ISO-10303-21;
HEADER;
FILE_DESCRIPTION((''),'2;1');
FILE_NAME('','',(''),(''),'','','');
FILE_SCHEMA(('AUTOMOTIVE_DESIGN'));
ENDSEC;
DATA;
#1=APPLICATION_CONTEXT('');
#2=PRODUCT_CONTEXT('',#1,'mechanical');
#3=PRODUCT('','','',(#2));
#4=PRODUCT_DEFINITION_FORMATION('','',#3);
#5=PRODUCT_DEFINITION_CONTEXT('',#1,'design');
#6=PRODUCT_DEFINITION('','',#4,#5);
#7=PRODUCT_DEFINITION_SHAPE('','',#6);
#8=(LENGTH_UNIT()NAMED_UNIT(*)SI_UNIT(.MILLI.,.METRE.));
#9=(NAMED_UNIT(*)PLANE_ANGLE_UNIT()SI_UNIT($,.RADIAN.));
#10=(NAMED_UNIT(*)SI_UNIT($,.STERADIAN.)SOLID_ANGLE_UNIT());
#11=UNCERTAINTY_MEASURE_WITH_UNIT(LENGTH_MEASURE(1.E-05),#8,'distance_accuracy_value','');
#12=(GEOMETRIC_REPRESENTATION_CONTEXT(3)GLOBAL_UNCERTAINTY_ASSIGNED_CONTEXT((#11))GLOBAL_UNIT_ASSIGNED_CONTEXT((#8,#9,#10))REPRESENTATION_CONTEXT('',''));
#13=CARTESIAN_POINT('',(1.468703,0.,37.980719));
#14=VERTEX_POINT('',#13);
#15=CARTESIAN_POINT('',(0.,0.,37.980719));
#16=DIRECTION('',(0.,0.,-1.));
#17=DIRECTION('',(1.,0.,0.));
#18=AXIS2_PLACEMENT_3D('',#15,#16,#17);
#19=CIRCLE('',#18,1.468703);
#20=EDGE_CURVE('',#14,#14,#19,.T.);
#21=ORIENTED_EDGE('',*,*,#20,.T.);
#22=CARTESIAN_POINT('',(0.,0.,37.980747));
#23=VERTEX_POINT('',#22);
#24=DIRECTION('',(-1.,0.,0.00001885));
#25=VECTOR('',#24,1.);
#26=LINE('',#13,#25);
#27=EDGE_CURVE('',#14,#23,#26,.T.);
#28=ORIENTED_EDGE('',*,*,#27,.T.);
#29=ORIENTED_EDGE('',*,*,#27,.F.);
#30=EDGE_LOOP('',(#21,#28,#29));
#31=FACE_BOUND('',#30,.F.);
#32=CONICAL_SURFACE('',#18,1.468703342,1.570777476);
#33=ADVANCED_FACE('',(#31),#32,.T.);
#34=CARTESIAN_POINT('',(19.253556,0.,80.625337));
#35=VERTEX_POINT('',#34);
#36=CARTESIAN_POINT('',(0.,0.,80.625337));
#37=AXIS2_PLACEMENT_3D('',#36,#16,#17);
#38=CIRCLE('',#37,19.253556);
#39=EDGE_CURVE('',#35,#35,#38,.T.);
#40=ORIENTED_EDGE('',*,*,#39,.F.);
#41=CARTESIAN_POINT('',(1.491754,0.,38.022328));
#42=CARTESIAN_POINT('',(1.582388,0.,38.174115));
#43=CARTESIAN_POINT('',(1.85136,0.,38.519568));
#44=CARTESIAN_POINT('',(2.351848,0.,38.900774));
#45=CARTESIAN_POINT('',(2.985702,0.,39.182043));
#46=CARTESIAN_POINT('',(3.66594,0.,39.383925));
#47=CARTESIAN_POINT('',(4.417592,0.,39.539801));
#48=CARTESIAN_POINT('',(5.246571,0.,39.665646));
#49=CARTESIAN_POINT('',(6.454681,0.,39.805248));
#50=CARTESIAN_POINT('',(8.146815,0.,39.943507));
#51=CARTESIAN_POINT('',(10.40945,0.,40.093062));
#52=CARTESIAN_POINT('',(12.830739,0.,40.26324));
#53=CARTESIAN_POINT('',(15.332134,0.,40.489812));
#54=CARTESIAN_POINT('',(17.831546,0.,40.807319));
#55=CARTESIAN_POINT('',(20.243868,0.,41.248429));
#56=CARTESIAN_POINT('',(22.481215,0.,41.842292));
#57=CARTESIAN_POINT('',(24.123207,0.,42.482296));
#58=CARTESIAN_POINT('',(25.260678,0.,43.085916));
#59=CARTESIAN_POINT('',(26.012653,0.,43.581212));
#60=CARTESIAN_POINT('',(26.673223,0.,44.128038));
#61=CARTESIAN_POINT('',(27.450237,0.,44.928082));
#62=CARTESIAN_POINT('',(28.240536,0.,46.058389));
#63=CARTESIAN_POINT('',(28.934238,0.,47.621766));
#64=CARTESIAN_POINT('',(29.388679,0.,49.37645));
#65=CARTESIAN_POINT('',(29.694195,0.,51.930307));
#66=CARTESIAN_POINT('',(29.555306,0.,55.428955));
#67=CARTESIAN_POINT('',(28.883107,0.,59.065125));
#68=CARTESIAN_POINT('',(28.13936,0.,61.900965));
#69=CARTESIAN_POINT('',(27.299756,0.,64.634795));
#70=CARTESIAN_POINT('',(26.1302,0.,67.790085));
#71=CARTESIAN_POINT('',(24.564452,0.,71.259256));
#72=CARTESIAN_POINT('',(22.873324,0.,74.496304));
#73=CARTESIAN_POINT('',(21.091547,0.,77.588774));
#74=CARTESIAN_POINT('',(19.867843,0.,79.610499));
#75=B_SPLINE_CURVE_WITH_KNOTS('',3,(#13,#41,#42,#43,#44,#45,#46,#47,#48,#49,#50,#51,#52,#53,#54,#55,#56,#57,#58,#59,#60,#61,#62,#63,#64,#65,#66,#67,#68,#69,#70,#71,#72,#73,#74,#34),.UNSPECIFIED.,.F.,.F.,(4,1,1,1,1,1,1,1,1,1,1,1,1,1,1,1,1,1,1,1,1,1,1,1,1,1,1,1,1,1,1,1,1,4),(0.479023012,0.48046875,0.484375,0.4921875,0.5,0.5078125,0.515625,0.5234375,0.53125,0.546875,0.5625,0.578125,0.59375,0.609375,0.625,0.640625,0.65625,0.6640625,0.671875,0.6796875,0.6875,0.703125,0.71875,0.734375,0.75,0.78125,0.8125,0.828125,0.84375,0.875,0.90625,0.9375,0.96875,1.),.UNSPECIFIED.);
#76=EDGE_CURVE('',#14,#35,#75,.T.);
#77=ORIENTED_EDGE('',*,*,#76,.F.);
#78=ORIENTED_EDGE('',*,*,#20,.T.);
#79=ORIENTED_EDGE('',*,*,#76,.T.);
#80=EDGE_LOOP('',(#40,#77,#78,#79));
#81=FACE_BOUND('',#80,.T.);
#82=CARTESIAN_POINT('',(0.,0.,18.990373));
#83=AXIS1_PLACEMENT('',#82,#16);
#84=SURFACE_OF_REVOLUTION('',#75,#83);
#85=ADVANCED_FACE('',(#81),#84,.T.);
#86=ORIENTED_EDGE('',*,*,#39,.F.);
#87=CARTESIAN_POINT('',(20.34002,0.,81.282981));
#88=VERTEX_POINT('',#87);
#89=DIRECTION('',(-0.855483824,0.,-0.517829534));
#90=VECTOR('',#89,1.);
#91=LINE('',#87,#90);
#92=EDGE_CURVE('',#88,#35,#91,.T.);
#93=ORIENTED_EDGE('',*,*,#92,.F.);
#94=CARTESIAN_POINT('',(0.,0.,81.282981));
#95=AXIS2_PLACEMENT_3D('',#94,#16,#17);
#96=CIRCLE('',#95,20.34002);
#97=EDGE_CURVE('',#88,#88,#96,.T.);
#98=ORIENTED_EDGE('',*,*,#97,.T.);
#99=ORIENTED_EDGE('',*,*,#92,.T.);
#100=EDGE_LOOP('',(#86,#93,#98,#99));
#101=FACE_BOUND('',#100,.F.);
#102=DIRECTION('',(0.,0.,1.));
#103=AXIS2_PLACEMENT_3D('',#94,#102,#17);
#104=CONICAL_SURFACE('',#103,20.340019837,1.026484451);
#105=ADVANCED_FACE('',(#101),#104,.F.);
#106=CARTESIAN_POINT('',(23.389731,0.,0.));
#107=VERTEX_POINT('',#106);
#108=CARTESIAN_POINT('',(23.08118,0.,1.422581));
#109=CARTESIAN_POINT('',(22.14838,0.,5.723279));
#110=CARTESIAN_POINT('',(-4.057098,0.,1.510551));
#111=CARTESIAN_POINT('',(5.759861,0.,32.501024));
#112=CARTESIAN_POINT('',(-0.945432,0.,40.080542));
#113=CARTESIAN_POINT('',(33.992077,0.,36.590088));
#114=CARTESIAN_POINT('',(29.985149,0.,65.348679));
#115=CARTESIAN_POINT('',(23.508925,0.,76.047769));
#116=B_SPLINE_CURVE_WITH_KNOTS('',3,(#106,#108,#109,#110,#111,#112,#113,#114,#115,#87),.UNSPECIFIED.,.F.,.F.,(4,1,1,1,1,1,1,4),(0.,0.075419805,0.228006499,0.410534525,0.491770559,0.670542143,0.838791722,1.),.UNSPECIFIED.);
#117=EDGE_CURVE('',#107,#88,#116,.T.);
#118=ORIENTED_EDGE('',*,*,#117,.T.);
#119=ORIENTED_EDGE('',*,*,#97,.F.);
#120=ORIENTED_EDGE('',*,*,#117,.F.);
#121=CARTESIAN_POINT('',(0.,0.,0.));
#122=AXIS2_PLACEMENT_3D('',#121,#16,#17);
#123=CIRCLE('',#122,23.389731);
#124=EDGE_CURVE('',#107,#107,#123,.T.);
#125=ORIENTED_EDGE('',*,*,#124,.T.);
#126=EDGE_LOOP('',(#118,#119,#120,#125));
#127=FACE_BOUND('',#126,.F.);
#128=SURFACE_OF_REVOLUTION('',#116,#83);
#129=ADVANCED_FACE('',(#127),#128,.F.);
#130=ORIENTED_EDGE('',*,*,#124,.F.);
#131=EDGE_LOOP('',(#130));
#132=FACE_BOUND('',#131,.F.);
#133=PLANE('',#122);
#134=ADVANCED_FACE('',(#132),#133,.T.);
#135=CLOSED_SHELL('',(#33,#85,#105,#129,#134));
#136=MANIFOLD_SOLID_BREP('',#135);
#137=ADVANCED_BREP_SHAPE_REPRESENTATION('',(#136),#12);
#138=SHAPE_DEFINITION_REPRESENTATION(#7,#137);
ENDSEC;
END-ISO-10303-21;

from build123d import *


# Not quite as in the source:
# - ends of sketch curves that miss each other by under 0.0002 mm in the source are joined
# - the dataset's text gives a spline's control points without its knots; the knots are read off the source's solid


with BuildPart() as f1:
    # F0 (on Front) → F1 (revolve)
    with BuildSketch(Plane.XZ):
        with BuildLine():
            Line((0, 0), (23.3897306025, 0))
            add(Edge.make_bspline(
                [(23.3897306025, 0), (23.0811798378, 1.4225812529), (22.1483800237, 5.7232788373), (-4.0570977705, 1.5105508976), (5.7598610272, 32.5010243601), (-0.9454321257, 40.0805419146), (33.9920769176, 36.5900877138), (29.9851488557, 65.348679349), (23.5089253895, 76.0477686392), (20.340019837, 81.2829807401)],
                knots=[0, 0, 0, 0, 0.0754198046, 0.2280064994, 0.4105345247, 0.4917705589, 0.6705421429, 0.838791722, 1, 1, 1, 1], degree=3))
            Line((20.340019837, 81.2829807401), (19.2535555125, 80.6253373124))
            add(Edge.make_bspline(
                [(1.4687033423, 37.9807189459), (1.4917544156, 38.0223281839), (1.58238803, 38.1741146427), (1.8513600454, 38.5195676029), (2.3518478608, 38.9007735045), (2.9857016516, 39.1820426358), (3.6659397339, 39.3839249896), (4.4175915194, 39.5398011877), (5.2465714411, 39.6656456284), (6.4546814047, 39.8052480611), (8.1468147671, 39.943506941), (10.4094502803, 40.0930615542), (12.8307393668, 40.2632395293), (15.3321339566, 40.4898116951), (17.8315460182, 40.8073186483), (20.2438677318, 41.2484287549), (22.4812150553, 41.8422920864), (24.1232066058, 42.4822959216), (25.2606781167, 43.0859163853), (26.0126529085, 43.5812118276), (26.6732225892, 44.1280379986), (27.4502369596, 44.9280821369), (28.2405364896, 46.0583886916), (28.9342379496, 47.6217661888), (29.3886791208, 49.376449929), (29.6941949541, 51.9303067104), (29.5553060802, 55.4289549611), (28.8831071859, 59.0651252809), (28.1393600861, 61.9009651867), (27.2997558906, 64.6347945785), (26.1302000679, 67.7900849021), (24.5644522425, 71.2592564884), (22.8733235274, 74.4963036898), (21.0915466535, 77.5887736478), (19.8678434372, 79.6104987432), (19.2535555125, 80.6253373124)],
                knots=[0.4790230117, 0.4790230117, 0.4790230117, 0.4790230117, 0.48046875, 0.484375, 0.4921875, 0.5, 0.5078125, 0.515625, 0.5234375, 0.53125, 0.546875, 0.5625, 0.578125, 0.59375, 0.609375, 0.625, 0.640625, 0.65625, 0.6640625, 0.671875, 0.6796875, 0.6875, 0.703125, 0.71875, 0.734375, 0.75, 0.78125, 0.8125, 0.828125, 0.84375, 0.875, 0.90625, 0.9375, 0.96875, 1, 1, 1, 1], degree=3))
            Line((1.4687033423, 37.9807189459), (0, 37.9807466314))
            Line((0, 37.9807466314), (0, 0))
        make_face()
    revolve(axis=Axis((0, 0, 18.9903733157), (0, 0, -1)))


solid = f1.part
